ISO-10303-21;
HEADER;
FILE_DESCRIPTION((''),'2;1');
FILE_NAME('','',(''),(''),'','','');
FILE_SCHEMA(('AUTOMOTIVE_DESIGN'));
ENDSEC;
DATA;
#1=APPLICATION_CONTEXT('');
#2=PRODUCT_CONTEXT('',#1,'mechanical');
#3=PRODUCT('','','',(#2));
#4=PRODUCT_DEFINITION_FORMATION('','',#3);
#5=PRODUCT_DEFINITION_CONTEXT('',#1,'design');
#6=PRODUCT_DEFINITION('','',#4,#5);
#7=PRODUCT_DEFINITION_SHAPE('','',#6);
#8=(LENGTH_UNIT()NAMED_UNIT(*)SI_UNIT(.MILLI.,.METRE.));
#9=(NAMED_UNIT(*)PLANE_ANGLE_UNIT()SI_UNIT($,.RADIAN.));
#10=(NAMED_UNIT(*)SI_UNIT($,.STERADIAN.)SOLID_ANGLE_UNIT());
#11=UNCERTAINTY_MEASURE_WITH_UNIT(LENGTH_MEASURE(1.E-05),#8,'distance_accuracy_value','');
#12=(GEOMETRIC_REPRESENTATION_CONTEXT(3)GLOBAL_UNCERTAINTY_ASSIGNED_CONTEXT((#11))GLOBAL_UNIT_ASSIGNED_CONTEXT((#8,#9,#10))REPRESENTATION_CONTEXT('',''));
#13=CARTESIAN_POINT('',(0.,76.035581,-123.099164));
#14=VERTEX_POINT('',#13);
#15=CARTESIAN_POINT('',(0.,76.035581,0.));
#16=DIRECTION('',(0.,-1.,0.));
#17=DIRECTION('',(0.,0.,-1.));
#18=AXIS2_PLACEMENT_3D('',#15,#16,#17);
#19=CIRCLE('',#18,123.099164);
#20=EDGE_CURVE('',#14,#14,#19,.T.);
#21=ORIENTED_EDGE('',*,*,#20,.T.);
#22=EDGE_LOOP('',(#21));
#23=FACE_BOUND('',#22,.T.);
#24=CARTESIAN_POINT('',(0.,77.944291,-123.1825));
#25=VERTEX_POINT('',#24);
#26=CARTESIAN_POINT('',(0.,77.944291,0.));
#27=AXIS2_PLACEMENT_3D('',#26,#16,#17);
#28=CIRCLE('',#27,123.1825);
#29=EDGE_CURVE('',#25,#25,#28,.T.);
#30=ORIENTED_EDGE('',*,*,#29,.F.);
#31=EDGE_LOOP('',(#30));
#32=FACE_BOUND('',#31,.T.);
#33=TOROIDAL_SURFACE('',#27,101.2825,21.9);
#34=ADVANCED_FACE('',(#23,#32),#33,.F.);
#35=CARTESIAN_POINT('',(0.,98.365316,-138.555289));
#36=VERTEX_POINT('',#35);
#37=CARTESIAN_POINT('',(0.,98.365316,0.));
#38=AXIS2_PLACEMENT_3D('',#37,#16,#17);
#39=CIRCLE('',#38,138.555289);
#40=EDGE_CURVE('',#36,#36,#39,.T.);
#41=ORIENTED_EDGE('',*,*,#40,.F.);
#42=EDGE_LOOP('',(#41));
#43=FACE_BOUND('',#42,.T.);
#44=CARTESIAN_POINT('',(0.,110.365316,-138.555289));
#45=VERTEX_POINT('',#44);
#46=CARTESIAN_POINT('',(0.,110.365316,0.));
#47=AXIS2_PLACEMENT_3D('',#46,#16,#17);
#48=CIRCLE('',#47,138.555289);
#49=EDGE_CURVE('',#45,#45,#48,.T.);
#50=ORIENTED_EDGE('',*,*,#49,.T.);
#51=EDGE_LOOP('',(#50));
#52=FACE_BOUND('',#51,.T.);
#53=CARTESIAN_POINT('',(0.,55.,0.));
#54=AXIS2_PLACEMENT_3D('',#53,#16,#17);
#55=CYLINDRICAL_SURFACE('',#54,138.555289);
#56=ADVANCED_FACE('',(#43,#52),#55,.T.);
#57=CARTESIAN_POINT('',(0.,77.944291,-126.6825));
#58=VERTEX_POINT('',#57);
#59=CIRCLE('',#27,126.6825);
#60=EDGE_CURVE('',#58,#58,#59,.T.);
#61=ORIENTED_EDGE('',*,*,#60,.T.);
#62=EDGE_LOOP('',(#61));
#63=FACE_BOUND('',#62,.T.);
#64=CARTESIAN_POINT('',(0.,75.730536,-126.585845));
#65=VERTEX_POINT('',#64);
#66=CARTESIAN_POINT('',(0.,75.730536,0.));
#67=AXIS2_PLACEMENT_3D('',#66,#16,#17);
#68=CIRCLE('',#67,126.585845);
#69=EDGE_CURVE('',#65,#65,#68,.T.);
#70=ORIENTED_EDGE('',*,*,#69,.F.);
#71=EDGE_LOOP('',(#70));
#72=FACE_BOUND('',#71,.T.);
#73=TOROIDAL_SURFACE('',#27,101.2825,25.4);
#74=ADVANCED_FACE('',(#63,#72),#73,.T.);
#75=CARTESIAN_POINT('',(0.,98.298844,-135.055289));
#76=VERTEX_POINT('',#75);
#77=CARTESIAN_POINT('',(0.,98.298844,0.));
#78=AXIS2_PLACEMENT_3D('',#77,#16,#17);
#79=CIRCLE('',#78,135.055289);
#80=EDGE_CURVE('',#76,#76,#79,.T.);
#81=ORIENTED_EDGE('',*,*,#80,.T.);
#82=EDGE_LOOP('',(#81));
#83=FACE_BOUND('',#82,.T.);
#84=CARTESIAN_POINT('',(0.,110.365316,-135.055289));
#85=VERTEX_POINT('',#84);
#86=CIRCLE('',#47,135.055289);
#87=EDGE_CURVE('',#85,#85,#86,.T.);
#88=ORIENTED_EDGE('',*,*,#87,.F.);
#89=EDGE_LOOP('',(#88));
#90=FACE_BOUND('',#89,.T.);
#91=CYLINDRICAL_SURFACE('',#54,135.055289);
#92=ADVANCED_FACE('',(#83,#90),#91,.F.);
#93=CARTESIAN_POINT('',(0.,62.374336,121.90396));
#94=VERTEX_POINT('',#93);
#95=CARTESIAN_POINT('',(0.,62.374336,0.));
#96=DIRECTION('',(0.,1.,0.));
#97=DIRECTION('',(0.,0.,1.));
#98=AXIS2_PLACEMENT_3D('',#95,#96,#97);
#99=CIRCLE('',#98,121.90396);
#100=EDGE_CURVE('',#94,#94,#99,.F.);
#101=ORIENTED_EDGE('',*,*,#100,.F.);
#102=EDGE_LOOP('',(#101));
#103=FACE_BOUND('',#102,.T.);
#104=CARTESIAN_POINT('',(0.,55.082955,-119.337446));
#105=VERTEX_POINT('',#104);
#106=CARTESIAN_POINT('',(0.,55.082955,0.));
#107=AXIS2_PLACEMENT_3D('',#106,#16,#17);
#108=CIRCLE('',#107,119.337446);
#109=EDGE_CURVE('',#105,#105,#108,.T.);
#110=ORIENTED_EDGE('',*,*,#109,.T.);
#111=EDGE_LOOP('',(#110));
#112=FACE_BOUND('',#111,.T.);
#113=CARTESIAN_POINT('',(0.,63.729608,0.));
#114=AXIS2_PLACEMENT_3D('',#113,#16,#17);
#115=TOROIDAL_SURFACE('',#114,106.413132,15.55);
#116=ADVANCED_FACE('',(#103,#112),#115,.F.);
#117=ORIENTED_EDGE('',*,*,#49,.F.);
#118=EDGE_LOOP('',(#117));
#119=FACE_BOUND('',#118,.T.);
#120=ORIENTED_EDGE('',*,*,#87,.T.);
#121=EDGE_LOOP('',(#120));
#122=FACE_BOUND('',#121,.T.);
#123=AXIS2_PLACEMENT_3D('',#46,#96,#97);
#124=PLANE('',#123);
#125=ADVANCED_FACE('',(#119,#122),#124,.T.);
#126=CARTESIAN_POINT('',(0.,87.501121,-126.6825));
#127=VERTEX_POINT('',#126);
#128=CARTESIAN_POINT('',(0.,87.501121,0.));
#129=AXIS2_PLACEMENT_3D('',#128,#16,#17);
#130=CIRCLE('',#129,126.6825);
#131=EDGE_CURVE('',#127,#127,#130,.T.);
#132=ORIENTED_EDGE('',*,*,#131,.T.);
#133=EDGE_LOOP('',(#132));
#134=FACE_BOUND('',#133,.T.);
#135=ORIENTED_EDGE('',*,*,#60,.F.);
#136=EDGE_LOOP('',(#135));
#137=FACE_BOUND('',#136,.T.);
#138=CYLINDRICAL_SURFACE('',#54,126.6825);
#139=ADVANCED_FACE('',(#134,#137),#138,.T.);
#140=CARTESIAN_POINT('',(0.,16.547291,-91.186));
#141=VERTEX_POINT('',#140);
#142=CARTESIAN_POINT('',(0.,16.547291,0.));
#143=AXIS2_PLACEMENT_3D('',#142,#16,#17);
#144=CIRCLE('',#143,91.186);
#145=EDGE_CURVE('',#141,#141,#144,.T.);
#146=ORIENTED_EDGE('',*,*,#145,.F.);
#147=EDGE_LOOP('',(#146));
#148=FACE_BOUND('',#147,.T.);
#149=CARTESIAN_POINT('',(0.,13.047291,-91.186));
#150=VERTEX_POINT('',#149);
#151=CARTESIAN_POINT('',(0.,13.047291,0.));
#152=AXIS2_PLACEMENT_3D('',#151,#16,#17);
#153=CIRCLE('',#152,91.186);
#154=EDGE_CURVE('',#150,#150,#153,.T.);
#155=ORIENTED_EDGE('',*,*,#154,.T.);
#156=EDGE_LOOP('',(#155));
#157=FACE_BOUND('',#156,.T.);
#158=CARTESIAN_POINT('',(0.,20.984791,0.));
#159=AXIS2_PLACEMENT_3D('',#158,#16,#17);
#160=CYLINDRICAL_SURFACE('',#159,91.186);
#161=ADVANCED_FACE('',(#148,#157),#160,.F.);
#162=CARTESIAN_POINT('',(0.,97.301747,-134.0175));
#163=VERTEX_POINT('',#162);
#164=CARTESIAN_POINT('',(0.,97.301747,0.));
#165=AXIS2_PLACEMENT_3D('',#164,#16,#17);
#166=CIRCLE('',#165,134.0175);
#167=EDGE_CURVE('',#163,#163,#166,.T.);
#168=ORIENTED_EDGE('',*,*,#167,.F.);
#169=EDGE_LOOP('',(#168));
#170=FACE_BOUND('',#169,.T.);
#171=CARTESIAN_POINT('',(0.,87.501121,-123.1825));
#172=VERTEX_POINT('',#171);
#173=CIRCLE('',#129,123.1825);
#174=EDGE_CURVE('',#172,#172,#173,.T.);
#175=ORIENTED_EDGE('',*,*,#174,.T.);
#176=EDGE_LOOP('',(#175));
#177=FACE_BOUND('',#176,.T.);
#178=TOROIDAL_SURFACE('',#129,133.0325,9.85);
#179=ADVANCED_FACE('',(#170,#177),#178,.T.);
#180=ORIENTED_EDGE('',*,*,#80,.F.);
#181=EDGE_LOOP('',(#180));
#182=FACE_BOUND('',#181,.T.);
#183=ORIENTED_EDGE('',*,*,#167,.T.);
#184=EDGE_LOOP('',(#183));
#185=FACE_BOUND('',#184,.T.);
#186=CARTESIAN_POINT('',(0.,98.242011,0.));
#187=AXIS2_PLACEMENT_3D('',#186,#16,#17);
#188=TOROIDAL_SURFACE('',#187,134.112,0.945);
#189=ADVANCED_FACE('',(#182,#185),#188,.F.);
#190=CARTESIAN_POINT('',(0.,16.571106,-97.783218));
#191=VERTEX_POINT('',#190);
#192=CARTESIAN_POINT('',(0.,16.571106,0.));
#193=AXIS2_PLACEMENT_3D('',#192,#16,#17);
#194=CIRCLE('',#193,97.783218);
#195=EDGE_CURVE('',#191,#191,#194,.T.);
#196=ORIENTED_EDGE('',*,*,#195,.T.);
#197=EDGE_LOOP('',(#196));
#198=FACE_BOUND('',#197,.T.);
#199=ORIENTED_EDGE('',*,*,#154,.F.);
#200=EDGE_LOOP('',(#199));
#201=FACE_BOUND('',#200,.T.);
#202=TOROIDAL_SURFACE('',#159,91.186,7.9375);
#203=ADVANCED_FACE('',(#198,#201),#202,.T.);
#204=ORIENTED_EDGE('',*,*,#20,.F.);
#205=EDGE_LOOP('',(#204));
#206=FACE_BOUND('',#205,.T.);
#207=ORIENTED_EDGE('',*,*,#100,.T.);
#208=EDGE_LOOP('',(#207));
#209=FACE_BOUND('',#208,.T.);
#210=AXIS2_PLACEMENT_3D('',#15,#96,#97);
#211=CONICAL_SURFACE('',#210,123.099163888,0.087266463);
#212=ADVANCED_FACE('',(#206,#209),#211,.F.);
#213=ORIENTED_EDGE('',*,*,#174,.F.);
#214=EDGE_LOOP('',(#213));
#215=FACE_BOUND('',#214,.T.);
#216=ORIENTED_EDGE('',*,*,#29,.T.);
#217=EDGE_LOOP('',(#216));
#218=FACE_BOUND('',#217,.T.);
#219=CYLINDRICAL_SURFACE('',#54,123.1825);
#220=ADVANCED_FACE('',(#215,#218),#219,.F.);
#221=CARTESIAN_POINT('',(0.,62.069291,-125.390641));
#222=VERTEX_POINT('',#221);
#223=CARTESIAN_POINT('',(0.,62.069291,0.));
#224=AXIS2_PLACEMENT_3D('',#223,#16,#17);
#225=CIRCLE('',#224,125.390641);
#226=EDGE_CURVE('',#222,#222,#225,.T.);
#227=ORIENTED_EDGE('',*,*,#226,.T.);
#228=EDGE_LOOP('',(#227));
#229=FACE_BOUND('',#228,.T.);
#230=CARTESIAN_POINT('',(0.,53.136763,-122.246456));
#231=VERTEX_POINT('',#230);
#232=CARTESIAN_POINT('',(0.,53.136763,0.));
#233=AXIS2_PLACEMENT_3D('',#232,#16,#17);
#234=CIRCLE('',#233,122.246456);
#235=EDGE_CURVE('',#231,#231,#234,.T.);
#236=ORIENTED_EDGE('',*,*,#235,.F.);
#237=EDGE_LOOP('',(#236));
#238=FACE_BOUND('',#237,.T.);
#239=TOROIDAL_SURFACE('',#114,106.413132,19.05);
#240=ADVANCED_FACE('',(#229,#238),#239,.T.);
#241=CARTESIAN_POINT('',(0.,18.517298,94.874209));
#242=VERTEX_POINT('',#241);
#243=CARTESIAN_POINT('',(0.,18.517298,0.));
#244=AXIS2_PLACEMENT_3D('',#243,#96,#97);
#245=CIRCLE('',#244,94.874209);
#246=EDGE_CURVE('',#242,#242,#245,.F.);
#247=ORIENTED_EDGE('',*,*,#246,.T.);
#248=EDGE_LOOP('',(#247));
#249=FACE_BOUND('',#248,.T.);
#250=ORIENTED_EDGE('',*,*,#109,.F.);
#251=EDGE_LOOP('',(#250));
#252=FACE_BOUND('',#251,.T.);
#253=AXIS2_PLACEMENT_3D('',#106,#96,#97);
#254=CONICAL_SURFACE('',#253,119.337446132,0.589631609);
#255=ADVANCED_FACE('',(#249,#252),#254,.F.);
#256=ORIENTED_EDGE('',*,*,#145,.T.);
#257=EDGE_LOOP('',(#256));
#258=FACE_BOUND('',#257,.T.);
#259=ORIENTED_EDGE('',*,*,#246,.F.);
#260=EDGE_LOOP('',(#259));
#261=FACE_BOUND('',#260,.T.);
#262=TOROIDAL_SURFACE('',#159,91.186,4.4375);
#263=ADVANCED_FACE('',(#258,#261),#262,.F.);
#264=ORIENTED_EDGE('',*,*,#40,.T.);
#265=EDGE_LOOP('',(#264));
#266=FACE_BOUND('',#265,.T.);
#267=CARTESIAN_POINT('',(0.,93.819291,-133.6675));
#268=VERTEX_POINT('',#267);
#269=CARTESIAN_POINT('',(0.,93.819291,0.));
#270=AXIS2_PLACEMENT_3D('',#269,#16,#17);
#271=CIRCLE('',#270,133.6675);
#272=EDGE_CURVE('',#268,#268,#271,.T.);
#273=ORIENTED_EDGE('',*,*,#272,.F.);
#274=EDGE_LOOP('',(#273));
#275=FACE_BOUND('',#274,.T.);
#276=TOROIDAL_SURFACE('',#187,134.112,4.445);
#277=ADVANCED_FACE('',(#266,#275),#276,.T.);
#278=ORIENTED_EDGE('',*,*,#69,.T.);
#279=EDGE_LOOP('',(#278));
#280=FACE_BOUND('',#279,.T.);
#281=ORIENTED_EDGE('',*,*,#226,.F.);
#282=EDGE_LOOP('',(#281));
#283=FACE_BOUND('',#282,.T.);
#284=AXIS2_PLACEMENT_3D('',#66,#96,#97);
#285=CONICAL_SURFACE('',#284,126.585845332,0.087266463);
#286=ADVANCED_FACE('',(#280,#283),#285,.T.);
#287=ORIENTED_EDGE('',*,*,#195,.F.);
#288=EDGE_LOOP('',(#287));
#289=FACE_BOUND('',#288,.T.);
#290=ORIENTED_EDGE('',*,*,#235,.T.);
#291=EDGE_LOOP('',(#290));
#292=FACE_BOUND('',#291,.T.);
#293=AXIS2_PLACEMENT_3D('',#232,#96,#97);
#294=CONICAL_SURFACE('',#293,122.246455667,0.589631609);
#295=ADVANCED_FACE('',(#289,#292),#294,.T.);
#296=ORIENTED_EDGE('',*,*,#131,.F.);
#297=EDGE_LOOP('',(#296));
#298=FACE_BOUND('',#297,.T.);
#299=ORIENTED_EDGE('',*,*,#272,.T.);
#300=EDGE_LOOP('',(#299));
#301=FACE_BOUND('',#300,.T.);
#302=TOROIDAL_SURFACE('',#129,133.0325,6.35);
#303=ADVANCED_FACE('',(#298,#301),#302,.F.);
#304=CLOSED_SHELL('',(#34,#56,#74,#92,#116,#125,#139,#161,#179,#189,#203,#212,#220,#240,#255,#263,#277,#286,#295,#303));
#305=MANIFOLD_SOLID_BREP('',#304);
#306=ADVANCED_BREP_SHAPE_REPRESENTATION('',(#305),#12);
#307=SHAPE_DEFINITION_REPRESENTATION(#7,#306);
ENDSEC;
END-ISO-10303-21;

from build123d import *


# Read off the part's stored shape, not the designer's step: Thicken1
with BuildPart() as part:
    # Thicken1 outline → Thicken1 (revolve)
    with BuildSketch(Plane.XY):
        with BuildLine():
            ThreePointArc((94.874208517, 18.517297872), (93.276682166, 17.070656178), (91.186, 16.547291374))
            Line((91.186, 16.547291374), (91.186, 13.047291374))
            ThreePointArc((91.186, 13.047291374), (94.925670916, 13.983450953), (97.783218052, 16.571105814))
            Line((97.783218052, 16.571105814), (122.246455667, 53.136762929))
            ThreePointArc((122.246455667, 53.136762929), (124.382440282, 57.404541307), (125.39064134, 62.069291374))
            Line((125.39064134, 62.069291374), (126.585845332, 75.730535508))
            ThreePointArc((126.585845332, 75.730535508), (126.658324828, 76.836358935), (126.6825, 77.944291374))
            Line((126.6825, 77.944291374), (126.6825, 87.501121148))
            ThreePointArc((126.6825, 87.501121148), (128.772790503, 92.210407188), (133.6675, 93.819291374))
            ThreePointArc((133.6675, 93.819291374), (137.139237072, 94.987189383), (138.555289406, 98.365316059))
            Line((138.555289406, 98.365316059), (138.555289406, 110.365316059))
            Line((138.555289406, 110.365316059), (135.055289406, 110.365316059))
            Line((135.055289406, 110.365316059), (135.055289406, 98.298844467))
            ThreePointArc((135.055289406, 98.298844467), (134.766722462, 97.560568313), (134.0175, 97.301747404))
            ThreePointArc((134.0175, 97.301747404), (126.424919126, 94.806076658), (123.1825, 87.501121148))
            Line((123.1825, 87.501121148), (123.1825, 77.944291374))
            ThreePointArc((123.1825, 77.944291374), (123.161656053, 76.989026791), (123.099163888, 76.035580608))
            Line((123.099163888, 76.035580608), (121.903959897, 62.374336473))
            ThreePointArc((121.903959897, 62.374336473), (121.080992629, 58.566627101), (119.337446132, 55.082954987))
            Line((119.337446132, 55.082954987), (94.874208517, 18.517297872))
        make_face()
    revolve(axis=Axis((0, 0, 0), (0, 1, 0)))


solid = part.part
